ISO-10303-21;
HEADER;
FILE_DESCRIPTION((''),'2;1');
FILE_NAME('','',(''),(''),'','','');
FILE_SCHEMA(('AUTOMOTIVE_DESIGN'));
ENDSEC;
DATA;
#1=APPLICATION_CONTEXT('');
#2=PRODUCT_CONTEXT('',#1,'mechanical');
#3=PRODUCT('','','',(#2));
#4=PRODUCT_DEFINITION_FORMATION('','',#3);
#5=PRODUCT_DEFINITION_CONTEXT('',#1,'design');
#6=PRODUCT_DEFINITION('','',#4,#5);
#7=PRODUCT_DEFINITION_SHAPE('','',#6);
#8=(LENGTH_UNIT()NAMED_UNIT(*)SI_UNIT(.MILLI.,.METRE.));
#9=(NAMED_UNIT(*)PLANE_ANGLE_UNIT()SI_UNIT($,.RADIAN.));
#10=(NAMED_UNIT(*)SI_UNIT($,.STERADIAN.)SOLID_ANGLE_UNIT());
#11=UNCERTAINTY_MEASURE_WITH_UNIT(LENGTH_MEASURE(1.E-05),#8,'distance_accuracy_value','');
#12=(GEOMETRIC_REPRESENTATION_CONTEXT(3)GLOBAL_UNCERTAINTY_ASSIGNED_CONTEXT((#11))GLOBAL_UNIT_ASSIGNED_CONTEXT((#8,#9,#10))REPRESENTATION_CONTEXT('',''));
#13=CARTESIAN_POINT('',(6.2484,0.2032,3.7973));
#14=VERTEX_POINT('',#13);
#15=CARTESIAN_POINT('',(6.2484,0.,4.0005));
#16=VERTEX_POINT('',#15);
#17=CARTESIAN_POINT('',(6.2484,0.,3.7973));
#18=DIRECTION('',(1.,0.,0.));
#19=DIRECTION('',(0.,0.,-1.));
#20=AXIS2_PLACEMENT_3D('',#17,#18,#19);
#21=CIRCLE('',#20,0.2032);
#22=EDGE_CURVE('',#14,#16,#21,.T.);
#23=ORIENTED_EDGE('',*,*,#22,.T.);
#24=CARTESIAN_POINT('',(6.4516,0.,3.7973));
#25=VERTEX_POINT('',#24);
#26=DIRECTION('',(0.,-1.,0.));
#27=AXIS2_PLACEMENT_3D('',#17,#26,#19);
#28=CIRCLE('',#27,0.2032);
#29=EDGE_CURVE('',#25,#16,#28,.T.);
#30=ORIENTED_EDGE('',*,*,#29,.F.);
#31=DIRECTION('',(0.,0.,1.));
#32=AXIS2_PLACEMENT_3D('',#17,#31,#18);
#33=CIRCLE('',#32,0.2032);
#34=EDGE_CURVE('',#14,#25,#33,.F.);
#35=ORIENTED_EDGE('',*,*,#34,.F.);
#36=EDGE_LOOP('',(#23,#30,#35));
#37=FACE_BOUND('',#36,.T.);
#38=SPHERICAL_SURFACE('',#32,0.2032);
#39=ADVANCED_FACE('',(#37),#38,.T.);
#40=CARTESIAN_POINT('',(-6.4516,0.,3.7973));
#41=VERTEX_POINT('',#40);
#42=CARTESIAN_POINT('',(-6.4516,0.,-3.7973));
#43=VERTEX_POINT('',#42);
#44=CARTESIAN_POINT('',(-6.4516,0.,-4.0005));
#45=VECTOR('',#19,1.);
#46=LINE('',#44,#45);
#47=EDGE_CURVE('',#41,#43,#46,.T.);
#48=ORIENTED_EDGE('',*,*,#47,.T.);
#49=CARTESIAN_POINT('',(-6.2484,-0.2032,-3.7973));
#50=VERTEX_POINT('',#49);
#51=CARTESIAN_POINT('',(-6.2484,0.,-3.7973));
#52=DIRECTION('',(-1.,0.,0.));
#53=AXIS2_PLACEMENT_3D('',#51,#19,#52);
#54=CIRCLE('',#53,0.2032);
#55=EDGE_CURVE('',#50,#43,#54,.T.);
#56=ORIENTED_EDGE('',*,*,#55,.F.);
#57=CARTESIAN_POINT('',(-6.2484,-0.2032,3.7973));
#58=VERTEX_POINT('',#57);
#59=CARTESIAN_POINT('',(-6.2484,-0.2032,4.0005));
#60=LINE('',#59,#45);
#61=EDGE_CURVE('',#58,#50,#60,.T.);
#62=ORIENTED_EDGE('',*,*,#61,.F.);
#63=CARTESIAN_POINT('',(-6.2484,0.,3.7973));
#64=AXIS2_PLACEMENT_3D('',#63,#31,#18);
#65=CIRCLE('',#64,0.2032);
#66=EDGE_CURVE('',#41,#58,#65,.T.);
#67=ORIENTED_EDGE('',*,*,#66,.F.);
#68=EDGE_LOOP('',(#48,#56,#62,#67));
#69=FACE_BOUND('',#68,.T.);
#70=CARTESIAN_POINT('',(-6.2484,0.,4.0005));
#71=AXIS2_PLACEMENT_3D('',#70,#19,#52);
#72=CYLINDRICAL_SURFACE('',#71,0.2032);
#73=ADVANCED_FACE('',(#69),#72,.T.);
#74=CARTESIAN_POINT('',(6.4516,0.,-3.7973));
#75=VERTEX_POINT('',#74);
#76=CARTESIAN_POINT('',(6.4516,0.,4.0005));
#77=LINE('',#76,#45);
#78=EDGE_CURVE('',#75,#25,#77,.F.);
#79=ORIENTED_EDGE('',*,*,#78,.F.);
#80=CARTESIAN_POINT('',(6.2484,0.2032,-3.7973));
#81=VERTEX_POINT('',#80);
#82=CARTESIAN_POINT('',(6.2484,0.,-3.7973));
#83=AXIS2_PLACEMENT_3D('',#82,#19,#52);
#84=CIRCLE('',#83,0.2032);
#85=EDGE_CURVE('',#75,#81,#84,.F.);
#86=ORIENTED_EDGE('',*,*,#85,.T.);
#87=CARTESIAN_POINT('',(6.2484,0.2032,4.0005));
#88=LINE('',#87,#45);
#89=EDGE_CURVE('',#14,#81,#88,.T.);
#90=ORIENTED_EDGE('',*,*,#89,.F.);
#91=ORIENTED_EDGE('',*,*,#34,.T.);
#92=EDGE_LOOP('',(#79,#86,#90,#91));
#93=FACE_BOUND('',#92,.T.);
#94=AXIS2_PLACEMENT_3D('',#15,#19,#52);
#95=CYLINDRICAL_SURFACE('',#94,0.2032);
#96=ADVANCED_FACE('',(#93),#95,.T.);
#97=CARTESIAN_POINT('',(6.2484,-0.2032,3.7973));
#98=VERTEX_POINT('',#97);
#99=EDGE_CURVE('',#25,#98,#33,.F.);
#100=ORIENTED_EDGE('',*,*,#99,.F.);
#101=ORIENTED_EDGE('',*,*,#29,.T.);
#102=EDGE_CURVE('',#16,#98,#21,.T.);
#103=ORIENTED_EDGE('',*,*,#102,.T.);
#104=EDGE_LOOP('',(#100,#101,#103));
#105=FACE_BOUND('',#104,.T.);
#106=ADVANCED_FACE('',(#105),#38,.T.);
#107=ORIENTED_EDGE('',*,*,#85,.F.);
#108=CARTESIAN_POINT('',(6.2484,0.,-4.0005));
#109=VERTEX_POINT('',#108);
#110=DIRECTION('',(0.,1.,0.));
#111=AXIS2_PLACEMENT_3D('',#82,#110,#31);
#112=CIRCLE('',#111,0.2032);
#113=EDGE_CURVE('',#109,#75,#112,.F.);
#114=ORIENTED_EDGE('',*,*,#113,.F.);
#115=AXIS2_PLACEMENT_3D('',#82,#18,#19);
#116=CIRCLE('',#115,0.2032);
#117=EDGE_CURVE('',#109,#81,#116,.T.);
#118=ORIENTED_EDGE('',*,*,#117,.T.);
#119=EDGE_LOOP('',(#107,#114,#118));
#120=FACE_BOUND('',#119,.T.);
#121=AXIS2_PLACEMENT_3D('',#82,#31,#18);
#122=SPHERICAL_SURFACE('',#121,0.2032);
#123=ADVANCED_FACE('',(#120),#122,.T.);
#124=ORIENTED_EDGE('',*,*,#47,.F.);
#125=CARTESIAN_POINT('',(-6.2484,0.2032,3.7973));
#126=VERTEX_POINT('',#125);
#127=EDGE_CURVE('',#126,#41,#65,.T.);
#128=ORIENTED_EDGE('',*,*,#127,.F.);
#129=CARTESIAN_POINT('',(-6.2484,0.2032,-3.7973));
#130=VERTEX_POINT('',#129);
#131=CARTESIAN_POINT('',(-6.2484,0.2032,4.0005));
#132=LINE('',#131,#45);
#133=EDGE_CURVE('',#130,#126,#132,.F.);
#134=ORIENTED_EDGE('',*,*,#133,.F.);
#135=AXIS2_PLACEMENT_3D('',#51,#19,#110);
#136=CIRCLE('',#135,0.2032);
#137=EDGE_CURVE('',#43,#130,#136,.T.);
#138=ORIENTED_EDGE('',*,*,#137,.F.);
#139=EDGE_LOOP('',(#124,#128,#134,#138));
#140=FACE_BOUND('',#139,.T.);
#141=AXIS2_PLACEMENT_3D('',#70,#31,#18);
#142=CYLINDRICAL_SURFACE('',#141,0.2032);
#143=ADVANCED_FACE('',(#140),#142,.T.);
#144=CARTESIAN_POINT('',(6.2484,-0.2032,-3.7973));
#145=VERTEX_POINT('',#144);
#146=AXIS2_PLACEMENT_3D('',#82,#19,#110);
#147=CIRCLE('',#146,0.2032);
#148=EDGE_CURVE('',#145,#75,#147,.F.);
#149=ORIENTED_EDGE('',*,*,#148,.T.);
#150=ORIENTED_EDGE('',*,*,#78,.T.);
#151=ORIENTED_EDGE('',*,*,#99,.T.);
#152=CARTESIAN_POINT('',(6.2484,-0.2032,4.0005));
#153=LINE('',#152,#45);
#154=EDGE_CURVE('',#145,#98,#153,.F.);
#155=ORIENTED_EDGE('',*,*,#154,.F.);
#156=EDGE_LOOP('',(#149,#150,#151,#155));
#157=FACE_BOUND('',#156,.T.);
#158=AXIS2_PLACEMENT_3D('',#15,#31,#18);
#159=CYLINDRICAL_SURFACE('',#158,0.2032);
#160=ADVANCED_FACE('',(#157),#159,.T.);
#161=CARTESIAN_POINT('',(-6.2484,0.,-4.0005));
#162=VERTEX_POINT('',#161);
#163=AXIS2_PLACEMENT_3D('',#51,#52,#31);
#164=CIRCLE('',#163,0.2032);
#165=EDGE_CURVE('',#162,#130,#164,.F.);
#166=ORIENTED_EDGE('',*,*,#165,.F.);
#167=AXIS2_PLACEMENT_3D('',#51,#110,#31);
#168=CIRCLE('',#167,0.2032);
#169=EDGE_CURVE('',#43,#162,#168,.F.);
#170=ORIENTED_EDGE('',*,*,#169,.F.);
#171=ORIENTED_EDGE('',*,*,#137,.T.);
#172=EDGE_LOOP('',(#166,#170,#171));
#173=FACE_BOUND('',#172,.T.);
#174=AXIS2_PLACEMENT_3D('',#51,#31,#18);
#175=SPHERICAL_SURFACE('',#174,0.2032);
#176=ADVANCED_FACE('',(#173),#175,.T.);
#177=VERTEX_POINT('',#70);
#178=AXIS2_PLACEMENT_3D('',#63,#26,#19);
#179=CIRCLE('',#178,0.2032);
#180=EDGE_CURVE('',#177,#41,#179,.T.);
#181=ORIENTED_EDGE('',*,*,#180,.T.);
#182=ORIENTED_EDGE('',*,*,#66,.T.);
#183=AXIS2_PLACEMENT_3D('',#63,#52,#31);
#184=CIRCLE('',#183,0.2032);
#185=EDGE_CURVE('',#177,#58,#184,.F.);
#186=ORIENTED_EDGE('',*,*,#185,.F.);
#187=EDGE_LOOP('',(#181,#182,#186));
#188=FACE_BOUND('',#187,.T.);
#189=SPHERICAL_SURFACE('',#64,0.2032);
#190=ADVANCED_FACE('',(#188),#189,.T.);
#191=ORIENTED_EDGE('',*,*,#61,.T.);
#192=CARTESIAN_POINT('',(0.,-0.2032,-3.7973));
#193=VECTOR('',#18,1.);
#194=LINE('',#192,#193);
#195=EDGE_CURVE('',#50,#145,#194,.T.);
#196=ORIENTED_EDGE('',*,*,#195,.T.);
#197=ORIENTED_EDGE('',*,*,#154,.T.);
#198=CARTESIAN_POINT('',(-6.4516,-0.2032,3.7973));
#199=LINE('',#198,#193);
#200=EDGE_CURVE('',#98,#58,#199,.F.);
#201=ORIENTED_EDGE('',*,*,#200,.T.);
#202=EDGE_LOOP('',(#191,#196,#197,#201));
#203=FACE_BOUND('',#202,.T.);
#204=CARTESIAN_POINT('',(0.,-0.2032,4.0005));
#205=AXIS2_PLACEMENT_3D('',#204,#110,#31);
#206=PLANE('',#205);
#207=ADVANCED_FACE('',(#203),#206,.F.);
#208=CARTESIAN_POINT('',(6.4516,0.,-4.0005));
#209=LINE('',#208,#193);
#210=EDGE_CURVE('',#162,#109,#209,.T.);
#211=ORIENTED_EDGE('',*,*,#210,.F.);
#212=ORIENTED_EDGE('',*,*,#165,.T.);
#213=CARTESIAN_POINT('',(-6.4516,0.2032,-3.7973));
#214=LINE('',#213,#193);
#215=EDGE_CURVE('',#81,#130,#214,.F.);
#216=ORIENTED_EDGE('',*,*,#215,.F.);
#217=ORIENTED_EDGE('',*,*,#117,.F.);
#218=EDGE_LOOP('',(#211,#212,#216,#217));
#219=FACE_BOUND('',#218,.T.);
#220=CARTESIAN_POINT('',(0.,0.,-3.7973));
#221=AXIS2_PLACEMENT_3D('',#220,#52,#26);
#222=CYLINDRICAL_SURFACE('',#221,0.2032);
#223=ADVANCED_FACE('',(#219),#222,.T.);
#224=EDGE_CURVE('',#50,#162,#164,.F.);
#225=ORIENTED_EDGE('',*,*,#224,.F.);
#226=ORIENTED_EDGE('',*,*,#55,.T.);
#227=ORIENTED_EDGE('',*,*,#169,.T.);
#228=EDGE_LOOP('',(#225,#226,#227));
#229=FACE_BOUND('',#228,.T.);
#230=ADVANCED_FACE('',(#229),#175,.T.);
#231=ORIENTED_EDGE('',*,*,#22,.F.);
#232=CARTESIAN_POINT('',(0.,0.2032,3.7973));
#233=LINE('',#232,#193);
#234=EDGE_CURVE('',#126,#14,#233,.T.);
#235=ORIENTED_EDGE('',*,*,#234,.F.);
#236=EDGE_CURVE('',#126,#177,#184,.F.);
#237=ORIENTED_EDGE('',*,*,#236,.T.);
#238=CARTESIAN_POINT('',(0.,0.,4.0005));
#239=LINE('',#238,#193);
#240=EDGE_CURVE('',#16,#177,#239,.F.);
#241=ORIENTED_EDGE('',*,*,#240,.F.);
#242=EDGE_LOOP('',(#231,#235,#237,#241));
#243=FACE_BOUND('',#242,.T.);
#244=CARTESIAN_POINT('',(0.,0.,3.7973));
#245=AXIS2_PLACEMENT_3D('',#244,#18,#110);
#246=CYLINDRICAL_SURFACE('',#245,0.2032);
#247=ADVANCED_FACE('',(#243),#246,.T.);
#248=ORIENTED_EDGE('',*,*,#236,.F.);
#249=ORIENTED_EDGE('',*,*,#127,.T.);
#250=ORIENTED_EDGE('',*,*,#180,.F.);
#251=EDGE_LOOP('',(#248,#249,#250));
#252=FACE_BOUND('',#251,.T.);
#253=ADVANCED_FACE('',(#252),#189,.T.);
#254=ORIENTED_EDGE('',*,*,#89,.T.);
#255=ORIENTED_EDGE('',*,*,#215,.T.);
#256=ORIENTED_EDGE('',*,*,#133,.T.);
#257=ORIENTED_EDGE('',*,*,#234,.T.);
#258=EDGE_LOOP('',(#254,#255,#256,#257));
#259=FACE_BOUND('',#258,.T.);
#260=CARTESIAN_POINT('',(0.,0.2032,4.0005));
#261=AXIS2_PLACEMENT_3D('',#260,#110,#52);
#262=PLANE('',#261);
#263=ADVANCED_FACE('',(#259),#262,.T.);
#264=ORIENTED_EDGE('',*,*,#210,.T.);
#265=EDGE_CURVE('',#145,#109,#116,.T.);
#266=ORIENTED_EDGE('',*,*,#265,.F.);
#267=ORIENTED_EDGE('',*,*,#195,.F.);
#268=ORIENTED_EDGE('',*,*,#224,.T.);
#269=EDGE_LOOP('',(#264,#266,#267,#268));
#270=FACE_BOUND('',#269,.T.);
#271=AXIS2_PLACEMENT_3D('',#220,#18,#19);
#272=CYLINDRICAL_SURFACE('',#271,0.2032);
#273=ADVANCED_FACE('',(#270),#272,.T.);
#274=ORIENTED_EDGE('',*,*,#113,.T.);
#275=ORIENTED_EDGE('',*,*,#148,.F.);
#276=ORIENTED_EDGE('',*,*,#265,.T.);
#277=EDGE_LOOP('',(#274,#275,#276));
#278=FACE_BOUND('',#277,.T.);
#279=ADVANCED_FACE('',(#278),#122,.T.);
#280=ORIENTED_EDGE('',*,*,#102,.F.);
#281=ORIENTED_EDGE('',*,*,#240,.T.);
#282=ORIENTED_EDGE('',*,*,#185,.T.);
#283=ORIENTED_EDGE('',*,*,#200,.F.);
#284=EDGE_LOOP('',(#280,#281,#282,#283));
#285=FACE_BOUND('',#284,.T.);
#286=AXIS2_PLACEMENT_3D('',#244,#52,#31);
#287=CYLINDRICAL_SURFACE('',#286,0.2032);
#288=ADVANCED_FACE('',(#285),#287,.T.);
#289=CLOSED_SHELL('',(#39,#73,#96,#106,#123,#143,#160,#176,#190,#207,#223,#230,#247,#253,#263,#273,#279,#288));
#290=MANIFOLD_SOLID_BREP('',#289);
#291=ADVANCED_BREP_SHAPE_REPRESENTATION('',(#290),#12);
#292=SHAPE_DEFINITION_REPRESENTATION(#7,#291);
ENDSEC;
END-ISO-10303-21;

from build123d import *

# Parameters (mm, degrees)
BOSS_EXTRUDE1_DEPTH = 4.0005
FILLET3_R           = 0.2032


with BuildPart() as part:
    # Sketch1 → Boss-Extrude1 (new, symmetric)
    with BuildSketch(Plane.XY):
        Polygon((6.4516, 0.2032), (-6.4516, 0.2032), (-6.4516, -0.2032), (-6.0452, -0.2032), (6.0452, -0.2032), (6.4516, -0.2032), align=None)
    extrude(amount=BOSS_EXTRUDE1_DEPTH, both=True)

    # Fillet3
    fillet3_edges = [part.edges().sort_by_distance(p)[0] for p in [
        (-6.4516, 0, 4.0005),
        (0, -0.2032, 4.0005),
        (6.4516, 0, 4.0005),
        (0, -0.2032, -4.0005),
        (-6.4516, 0, -4.0005),
        (0, 0.2032, -4.0005),
        (6.4516, 0, -4.0005),
        (0, 0.2032, 4.0005),
        (6.4516, -0.2032, 0),
        (-6.4516, -0.2032, 0),
        (-6.4516, 0.2032, 0),
        (6.4516, 0.2032, 0),
    ]]
    fillet(fillet3_edges, radius=FILLET3_R - 0.0001)  # a hair under: the kernel refuses the full size


solid = part.part
